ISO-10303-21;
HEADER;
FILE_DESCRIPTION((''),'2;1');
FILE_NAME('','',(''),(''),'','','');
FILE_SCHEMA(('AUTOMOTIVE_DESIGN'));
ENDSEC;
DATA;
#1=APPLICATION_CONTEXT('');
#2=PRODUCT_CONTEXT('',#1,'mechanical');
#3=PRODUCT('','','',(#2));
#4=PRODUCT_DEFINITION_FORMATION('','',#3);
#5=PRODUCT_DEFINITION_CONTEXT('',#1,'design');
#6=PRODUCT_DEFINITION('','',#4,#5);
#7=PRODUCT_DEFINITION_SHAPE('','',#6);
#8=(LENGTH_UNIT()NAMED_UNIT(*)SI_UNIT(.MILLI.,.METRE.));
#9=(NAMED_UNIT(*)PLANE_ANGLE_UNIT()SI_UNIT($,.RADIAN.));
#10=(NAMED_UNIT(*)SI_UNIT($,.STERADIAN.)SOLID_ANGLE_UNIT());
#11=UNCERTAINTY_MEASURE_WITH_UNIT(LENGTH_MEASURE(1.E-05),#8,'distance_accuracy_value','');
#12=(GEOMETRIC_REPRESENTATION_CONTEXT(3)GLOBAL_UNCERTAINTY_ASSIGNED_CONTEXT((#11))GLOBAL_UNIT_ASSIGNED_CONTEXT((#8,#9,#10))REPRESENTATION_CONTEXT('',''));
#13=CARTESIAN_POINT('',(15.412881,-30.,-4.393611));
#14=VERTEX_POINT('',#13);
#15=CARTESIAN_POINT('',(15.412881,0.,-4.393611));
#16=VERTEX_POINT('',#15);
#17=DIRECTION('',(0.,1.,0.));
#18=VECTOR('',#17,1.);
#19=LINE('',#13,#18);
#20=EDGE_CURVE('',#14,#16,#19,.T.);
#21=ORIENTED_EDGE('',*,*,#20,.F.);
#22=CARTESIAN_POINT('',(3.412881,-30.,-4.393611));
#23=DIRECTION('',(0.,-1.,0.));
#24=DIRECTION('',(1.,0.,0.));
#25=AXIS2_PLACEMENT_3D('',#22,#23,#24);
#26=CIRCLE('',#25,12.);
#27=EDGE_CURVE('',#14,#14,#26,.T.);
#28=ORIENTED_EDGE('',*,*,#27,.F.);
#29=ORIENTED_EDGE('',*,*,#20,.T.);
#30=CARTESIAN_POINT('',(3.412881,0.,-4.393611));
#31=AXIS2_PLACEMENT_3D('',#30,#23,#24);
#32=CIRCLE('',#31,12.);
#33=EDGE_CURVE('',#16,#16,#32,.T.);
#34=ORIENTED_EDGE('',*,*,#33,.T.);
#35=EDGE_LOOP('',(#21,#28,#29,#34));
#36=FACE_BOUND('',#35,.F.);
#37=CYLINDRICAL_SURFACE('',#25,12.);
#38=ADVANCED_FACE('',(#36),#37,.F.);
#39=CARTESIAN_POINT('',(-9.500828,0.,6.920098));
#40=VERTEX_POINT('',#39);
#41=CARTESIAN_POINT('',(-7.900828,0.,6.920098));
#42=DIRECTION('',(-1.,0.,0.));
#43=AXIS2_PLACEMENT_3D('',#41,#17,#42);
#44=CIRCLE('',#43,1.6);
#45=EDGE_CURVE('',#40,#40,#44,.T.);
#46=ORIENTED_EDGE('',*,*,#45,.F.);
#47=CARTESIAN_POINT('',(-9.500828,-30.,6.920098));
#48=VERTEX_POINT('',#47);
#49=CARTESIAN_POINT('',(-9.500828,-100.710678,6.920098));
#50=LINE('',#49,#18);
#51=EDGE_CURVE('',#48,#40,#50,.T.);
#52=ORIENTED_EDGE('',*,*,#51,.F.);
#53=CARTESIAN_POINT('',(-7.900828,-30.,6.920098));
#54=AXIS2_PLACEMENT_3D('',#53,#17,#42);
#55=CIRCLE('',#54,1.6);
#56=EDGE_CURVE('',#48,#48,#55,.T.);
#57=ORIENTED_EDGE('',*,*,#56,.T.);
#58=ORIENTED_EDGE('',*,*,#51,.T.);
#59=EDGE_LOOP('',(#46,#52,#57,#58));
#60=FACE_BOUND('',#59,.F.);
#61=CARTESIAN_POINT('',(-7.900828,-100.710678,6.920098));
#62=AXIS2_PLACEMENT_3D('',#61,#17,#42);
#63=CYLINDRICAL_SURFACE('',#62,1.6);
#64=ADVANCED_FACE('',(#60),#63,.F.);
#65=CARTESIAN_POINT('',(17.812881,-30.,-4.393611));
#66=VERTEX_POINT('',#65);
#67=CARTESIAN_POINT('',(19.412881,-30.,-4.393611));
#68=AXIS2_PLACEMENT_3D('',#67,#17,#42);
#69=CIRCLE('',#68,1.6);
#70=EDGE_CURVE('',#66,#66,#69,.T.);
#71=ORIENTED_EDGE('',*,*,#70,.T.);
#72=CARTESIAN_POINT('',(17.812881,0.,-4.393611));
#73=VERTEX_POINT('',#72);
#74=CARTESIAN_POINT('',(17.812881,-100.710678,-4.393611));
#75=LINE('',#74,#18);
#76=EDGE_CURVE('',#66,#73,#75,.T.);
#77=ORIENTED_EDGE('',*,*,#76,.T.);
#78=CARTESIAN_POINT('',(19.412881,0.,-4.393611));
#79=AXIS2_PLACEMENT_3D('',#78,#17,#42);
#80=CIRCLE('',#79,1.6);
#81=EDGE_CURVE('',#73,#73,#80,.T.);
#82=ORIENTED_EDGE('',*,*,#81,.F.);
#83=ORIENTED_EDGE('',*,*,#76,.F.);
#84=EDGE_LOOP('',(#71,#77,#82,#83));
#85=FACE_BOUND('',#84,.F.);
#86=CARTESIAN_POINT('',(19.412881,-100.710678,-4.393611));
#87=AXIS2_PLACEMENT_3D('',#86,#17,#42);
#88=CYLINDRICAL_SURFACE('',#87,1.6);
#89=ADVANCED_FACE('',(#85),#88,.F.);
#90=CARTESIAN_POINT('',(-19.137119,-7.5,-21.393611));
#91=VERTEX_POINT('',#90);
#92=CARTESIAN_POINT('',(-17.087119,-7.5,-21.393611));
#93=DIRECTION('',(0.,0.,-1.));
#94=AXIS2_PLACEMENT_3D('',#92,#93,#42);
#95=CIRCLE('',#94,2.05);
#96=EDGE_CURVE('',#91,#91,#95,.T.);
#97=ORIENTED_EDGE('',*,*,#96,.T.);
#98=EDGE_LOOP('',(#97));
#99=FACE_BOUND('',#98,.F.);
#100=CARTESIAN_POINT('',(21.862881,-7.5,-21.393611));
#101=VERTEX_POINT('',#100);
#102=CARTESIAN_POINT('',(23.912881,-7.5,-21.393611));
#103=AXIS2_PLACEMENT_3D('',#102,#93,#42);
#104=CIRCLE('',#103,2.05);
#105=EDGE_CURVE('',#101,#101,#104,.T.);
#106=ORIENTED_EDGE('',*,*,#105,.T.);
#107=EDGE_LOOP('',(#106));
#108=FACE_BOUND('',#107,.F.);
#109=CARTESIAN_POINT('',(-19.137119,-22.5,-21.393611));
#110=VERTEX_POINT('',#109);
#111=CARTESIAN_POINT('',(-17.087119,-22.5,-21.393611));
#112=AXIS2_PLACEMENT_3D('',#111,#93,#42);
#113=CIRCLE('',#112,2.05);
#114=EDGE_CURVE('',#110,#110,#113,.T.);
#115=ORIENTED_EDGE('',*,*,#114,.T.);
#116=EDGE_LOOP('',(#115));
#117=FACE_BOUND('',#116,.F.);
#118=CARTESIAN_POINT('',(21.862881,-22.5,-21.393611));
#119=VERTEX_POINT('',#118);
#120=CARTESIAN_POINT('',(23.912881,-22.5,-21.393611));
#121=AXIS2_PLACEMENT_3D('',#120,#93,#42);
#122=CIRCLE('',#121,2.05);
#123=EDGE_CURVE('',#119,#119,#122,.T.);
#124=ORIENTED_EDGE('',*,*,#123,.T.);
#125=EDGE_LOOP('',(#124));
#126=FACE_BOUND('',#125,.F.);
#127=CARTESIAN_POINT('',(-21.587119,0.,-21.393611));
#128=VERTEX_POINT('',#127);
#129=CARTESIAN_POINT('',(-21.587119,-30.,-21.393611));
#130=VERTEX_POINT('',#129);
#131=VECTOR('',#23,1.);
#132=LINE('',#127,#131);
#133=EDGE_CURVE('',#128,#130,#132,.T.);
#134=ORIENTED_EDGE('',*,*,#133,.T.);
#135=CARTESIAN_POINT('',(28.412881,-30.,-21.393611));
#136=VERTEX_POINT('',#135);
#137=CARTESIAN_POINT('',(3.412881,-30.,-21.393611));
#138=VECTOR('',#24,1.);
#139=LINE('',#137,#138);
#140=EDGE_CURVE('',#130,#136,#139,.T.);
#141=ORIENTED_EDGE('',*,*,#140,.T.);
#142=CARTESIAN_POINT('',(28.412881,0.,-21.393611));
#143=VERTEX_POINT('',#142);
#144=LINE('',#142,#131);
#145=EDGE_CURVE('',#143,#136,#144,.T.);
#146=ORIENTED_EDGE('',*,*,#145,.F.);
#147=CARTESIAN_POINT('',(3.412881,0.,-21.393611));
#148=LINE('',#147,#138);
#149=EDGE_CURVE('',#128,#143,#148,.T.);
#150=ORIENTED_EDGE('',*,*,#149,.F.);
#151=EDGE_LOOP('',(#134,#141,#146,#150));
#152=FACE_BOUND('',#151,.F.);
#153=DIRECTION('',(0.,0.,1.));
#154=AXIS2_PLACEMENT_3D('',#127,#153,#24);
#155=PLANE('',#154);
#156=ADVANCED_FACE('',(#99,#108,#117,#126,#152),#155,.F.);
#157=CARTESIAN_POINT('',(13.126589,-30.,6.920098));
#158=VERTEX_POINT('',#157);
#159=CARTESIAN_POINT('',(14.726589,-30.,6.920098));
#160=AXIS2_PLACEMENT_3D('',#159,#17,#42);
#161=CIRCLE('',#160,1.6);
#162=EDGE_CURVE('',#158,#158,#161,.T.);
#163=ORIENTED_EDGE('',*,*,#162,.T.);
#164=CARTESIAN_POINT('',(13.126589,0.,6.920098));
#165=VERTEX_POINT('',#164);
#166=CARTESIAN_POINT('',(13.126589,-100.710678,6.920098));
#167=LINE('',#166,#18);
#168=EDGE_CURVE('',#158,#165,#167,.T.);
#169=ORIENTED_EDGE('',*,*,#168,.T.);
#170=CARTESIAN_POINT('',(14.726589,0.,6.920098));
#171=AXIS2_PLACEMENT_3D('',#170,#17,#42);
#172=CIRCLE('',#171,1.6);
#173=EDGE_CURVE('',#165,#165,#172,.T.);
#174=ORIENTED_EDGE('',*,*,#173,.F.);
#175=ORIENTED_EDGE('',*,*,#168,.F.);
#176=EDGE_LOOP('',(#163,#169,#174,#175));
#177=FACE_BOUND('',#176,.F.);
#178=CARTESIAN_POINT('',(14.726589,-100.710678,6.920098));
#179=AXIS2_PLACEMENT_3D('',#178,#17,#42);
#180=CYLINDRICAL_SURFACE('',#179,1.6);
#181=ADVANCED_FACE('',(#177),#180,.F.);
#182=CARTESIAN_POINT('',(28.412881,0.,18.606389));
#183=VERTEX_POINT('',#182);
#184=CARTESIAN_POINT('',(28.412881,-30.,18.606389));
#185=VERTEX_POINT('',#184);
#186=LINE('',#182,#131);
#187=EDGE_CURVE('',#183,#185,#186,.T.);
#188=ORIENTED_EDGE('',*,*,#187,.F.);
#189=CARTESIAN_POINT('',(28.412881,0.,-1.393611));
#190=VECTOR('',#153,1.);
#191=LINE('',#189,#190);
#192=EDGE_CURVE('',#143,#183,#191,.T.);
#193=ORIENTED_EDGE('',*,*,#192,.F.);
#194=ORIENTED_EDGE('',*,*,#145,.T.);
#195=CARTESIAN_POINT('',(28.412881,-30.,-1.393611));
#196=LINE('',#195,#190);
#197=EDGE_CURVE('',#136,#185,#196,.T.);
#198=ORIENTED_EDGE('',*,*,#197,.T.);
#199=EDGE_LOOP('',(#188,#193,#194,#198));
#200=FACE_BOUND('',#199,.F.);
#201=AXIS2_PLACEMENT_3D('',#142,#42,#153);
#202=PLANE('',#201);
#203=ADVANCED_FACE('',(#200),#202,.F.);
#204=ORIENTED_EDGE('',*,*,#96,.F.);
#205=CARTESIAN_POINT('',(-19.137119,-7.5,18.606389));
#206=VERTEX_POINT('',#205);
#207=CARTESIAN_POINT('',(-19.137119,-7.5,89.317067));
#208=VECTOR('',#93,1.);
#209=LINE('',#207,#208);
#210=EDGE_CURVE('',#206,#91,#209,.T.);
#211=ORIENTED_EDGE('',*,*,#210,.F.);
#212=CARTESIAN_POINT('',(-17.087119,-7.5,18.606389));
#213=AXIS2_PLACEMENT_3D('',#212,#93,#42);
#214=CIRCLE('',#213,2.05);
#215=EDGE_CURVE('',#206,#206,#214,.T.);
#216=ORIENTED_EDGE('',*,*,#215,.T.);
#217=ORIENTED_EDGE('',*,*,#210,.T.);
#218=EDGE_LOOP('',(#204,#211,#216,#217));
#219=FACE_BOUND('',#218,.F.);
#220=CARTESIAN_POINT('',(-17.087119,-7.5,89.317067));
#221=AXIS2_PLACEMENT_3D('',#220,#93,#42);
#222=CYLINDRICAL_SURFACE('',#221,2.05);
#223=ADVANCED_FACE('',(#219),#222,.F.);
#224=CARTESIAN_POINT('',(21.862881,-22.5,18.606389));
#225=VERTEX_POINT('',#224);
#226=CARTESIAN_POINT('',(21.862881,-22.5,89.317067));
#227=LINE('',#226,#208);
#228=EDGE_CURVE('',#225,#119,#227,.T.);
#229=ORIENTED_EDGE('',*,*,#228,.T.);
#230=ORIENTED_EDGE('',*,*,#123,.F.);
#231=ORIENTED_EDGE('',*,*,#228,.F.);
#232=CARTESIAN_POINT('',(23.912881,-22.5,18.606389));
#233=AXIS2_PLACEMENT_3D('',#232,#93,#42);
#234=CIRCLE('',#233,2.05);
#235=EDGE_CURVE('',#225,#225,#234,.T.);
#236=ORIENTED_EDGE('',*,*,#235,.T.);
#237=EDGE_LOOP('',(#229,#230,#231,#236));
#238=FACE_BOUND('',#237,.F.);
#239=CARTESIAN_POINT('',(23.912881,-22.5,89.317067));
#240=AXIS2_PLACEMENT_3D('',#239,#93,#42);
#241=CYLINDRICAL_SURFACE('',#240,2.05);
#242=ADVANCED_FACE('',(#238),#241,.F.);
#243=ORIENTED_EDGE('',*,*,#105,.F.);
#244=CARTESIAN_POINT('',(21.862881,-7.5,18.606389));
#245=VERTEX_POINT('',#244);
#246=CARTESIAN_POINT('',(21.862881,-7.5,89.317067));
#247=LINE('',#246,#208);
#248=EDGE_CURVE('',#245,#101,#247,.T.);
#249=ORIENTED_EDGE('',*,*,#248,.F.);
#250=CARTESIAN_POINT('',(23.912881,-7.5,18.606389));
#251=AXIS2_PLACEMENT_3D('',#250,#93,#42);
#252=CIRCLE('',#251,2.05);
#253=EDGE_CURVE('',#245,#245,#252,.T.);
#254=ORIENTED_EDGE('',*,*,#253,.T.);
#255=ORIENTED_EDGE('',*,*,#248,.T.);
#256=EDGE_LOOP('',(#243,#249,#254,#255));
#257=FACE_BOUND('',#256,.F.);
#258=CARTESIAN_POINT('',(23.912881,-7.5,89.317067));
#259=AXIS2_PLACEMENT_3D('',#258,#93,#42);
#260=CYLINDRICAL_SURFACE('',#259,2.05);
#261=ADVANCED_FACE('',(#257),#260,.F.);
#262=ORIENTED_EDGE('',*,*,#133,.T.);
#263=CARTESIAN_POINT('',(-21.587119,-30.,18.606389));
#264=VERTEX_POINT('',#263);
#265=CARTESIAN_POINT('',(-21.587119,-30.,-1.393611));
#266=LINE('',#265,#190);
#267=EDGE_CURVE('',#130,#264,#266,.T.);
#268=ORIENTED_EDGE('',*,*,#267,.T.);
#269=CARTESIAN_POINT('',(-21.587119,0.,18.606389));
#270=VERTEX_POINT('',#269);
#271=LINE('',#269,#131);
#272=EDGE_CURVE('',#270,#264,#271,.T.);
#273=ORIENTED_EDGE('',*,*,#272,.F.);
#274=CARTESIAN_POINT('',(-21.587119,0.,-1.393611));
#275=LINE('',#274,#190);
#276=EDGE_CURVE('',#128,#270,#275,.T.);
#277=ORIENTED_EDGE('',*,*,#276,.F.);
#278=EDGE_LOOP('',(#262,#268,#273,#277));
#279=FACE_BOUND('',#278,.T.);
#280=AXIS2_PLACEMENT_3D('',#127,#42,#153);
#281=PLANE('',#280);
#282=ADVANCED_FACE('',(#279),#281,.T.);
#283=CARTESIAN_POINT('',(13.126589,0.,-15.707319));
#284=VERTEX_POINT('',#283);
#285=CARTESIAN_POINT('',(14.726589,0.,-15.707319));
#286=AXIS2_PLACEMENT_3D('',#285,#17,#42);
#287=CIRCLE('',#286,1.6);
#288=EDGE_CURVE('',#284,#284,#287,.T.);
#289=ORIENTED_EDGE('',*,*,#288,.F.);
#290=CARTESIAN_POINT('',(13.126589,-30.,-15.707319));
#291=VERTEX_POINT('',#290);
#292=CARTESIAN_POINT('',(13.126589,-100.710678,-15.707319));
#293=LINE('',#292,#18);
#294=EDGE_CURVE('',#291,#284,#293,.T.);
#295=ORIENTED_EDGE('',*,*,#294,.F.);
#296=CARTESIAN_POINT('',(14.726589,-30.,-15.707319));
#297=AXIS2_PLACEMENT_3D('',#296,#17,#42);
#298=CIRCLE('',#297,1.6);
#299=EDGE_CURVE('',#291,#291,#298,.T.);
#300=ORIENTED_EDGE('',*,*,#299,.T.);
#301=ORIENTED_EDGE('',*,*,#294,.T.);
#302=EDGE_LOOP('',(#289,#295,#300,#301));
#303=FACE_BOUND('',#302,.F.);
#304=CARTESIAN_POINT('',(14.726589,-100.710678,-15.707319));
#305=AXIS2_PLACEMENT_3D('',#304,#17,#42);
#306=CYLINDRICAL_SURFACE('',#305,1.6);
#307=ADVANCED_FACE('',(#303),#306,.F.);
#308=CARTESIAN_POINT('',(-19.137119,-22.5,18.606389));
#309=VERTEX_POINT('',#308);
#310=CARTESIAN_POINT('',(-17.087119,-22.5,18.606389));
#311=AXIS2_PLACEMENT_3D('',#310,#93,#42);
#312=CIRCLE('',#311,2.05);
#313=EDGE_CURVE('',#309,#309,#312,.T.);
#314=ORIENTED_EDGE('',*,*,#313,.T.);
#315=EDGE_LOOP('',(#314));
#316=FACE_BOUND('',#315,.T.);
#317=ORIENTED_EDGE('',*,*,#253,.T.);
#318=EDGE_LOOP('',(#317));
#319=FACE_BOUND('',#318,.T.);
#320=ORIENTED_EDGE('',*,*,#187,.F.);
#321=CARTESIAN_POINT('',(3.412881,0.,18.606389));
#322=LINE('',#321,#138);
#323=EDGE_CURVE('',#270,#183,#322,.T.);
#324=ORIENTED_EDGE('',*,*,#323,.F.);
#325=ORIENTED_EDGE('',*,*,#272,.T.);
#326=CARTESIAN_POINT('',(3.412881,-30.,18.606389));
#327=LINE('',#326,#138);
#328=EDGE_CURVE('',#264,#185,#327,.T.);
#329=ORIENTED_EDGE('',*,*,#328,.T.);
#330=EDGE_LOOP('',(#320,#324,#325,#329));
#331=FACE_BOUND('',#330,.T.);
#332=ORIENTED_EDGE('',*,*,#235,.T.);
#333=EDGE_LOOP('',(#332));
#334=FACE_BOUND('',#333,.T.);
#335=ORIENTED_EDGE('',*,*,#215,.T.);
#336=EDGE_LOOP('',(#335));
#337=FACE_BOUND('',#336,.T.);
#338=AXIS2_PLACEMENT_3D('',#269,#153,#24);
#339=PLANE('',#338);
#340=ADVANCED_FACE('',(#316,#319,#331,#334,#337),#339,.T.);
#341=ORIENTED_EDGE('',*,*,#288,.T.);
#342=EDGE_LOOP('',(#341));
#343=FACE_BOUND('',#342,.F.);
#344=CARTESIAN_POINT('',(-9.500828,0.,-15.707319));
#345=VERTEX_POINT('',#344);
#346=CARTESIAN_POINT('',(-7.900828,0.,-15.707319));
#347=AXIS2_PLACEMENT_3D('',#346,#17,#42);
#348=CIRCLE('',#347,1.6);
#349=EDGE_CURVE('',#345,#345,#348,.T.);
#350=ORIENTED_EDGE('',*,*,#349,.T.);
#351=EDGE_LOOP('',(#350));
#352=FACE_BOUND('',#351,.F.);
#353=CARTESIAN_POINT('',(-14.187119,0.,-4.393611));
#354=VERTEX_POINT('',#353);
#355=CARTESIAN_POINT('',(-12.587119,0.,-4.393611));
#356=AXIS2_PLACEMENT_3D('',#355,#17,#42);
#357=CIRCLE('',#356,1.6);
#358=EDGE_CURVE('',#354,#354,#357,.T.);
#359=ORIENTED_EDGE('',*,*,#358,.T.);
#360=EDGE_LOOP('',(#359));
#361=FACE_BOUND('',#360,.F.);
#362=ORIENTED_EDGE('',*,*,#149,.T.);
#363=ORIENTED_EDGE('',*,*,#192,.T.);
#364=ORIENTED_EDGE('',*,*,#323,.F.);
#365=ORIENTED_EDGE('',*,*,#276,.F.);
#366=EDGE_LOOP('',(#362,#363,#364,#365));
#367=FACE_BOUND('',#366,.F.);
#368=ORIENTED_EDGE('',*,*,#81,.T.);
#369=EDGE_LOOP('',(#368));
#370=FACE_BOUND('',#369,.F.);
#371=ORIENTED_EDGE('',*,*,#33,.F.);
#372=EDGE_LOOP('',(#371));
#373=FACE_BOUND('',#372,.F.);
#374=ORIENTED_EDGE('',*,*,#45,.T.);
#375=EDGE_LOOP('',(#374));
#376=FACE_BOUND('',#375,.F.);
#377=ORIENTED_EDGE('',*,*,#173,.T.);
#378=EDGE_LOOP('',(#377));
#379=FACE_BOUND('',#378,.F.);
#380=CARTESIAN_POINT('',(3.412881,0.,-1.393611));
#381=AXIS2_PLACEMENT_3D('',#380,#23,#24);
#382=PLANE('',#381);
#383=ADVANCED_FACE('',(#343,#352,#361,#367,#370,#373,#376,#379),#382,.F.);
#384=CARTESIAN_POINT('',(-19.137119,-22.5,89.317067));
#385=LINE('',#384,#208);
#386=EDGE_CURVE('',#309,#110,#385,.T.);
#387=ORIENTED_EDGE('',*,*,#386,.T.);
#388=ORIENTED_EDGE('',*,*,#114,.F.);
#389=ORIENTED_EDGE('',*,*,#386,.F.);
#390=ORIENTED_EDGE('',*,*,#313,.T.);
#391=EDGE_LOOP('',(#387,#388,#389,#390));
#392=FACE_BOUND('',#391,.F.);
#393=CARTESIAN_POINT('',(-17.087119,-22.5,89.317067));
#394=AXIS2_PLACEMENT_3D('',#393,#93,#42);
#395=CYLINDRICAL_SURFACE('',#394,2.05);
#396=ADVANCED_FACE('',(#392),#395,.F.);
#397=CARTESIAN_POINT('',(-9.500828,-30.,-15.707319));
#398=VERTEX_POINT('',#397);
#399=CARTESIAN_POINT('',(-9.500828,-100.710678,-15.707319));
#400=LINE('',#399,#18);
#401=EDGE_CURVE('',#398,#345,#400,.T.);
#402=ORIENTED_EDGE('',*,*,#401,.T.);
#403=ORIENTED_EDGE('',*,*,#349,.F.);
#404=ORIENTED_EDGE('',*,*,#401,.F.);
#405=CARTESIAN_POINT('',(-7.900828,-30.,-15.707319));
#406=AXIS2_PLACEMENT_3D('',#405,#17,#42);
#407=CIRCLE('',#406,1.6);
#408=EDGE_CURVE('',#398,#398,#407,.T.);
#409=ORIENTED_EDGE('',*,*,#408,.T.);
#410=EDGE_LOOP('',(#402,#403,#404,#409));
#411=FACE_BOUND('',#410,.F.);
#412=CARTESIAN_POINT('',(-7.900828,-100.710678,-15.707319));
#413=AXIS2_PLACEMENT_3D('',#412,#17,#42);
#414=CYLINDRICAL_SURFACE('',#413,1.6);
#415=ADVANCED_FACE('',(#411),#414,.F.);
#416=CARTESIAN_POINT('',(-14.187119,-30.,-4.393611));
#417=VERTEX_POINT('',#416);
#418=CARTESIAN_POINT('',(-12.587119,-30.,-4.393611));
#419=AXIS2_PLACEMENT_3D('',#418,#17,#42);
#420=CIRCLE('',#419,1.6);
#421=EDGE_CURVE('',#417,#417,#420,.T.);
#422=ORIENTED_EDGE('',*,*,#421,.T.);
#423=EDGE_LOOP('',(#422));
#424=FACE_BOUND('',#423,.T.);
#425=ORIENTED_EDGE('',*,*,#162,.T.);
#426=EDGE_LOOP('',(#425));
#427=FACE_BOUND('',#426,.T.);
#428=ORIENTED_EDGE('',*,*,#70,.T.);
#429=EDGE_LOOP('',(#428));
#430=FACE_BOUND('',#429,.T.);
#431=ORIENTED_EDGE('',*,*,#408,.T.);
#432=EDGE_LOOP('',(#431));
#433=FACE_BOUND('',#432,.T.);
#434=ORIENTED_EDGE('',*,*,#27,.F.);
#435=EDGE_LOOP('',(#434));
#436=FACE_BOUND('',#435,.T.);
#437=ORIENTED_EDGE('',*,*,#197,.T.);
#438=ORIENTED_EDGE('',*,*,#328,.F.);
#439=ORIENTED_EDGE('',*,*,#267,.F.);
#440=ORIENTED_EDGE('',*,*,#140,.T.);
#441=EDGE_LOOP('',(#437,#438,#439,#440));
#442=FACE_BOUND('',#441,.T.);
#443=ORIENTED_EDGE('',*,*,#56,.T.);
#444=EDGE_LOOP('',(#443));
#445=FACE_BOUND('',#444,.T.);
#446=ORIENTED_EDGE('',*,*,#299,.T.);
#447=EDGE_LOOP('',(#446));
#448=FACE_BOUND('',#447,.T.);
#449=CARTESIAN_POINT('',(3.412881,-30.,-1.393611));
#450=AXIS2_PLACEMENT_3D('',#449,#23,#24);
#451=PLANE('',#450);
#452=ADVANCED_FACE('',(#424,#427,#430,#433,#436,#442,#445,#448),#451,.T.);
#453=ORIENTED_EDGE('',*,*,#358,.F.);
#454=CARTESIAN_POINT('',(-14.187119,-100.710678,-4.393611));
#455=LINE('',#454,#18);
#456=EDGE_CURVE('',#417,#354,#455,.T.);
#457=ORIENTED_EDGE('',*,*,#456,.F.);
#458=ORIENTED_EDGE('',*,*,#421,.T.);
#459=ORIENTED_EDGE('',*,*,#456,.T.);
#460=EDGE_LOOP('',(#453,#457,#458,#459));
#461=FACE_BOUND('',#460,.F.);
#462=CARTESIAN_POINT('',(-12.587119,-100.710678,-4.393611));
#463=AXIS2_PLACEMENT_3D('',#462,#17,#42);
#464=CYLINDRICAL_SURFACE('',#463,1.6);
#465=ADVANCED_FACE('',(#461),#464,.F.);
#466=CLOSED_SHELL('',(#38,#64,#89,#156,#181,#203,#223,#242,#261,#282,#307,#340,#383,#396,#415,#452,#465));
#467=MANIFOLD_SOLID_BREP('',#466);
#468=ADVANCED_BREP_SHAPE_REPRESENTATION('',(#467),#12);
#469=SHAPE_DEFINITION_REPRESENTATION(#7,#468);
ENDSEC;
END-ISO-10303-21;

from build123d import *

# Parameters (mm, degrees)
F0_W     = 50
F0_H     = 40
F1_DEPTH = 30
F2_R     = 12
F3_DEPTH = 30.001
F4_D     = 3.2
F6_D     = 4.1


# Not quite as in the source:
# - a feature names something its author has since deleted; it is built from what else it names


with BuildPart() as f1:
    # F0 (on Front) → F1 (new body)
    with BuildSketch(Plane.XZ):
        with Locations((3.412880823, -1.3936108311)):
            Rectangle(F0_W, F0_H)
    extrude(amount=F1_DEPTH)

    # F2 (on face) → F3 (cut, through all)
    with BuildSketch(Plane.XZ.offset(30)):
        with Locations((3.412880823, -4.3936108311)):
            Circle(F2_R)
    extrude(amount=-F3_DEPTH, mode=Mode.SUBTRACT)

    # F4 (through all)
    with Locations(Plane.XZ.offset(30)):
        with Locations((-7.900827676, 6.9200976679), (-12.587119177, -4.3936108311), (-7.900827676, -15.7073193301), (14.726589322, -15.7073193301), (19.412880823, -4.3936108311), (14.726589322, 6.9200976679)):
            Hole(F4_D / 2)

    # F6 (through all)
    with Locations(Plane.XY.offset(18.6063891689)):
        with Locations((23.912880823, -22.5), (23.912880823, -7.5), (-17.087119177, -7.5), (-17.087119177, -22.5)):
            Hole(F6_D / 2)


solid = f1.part
